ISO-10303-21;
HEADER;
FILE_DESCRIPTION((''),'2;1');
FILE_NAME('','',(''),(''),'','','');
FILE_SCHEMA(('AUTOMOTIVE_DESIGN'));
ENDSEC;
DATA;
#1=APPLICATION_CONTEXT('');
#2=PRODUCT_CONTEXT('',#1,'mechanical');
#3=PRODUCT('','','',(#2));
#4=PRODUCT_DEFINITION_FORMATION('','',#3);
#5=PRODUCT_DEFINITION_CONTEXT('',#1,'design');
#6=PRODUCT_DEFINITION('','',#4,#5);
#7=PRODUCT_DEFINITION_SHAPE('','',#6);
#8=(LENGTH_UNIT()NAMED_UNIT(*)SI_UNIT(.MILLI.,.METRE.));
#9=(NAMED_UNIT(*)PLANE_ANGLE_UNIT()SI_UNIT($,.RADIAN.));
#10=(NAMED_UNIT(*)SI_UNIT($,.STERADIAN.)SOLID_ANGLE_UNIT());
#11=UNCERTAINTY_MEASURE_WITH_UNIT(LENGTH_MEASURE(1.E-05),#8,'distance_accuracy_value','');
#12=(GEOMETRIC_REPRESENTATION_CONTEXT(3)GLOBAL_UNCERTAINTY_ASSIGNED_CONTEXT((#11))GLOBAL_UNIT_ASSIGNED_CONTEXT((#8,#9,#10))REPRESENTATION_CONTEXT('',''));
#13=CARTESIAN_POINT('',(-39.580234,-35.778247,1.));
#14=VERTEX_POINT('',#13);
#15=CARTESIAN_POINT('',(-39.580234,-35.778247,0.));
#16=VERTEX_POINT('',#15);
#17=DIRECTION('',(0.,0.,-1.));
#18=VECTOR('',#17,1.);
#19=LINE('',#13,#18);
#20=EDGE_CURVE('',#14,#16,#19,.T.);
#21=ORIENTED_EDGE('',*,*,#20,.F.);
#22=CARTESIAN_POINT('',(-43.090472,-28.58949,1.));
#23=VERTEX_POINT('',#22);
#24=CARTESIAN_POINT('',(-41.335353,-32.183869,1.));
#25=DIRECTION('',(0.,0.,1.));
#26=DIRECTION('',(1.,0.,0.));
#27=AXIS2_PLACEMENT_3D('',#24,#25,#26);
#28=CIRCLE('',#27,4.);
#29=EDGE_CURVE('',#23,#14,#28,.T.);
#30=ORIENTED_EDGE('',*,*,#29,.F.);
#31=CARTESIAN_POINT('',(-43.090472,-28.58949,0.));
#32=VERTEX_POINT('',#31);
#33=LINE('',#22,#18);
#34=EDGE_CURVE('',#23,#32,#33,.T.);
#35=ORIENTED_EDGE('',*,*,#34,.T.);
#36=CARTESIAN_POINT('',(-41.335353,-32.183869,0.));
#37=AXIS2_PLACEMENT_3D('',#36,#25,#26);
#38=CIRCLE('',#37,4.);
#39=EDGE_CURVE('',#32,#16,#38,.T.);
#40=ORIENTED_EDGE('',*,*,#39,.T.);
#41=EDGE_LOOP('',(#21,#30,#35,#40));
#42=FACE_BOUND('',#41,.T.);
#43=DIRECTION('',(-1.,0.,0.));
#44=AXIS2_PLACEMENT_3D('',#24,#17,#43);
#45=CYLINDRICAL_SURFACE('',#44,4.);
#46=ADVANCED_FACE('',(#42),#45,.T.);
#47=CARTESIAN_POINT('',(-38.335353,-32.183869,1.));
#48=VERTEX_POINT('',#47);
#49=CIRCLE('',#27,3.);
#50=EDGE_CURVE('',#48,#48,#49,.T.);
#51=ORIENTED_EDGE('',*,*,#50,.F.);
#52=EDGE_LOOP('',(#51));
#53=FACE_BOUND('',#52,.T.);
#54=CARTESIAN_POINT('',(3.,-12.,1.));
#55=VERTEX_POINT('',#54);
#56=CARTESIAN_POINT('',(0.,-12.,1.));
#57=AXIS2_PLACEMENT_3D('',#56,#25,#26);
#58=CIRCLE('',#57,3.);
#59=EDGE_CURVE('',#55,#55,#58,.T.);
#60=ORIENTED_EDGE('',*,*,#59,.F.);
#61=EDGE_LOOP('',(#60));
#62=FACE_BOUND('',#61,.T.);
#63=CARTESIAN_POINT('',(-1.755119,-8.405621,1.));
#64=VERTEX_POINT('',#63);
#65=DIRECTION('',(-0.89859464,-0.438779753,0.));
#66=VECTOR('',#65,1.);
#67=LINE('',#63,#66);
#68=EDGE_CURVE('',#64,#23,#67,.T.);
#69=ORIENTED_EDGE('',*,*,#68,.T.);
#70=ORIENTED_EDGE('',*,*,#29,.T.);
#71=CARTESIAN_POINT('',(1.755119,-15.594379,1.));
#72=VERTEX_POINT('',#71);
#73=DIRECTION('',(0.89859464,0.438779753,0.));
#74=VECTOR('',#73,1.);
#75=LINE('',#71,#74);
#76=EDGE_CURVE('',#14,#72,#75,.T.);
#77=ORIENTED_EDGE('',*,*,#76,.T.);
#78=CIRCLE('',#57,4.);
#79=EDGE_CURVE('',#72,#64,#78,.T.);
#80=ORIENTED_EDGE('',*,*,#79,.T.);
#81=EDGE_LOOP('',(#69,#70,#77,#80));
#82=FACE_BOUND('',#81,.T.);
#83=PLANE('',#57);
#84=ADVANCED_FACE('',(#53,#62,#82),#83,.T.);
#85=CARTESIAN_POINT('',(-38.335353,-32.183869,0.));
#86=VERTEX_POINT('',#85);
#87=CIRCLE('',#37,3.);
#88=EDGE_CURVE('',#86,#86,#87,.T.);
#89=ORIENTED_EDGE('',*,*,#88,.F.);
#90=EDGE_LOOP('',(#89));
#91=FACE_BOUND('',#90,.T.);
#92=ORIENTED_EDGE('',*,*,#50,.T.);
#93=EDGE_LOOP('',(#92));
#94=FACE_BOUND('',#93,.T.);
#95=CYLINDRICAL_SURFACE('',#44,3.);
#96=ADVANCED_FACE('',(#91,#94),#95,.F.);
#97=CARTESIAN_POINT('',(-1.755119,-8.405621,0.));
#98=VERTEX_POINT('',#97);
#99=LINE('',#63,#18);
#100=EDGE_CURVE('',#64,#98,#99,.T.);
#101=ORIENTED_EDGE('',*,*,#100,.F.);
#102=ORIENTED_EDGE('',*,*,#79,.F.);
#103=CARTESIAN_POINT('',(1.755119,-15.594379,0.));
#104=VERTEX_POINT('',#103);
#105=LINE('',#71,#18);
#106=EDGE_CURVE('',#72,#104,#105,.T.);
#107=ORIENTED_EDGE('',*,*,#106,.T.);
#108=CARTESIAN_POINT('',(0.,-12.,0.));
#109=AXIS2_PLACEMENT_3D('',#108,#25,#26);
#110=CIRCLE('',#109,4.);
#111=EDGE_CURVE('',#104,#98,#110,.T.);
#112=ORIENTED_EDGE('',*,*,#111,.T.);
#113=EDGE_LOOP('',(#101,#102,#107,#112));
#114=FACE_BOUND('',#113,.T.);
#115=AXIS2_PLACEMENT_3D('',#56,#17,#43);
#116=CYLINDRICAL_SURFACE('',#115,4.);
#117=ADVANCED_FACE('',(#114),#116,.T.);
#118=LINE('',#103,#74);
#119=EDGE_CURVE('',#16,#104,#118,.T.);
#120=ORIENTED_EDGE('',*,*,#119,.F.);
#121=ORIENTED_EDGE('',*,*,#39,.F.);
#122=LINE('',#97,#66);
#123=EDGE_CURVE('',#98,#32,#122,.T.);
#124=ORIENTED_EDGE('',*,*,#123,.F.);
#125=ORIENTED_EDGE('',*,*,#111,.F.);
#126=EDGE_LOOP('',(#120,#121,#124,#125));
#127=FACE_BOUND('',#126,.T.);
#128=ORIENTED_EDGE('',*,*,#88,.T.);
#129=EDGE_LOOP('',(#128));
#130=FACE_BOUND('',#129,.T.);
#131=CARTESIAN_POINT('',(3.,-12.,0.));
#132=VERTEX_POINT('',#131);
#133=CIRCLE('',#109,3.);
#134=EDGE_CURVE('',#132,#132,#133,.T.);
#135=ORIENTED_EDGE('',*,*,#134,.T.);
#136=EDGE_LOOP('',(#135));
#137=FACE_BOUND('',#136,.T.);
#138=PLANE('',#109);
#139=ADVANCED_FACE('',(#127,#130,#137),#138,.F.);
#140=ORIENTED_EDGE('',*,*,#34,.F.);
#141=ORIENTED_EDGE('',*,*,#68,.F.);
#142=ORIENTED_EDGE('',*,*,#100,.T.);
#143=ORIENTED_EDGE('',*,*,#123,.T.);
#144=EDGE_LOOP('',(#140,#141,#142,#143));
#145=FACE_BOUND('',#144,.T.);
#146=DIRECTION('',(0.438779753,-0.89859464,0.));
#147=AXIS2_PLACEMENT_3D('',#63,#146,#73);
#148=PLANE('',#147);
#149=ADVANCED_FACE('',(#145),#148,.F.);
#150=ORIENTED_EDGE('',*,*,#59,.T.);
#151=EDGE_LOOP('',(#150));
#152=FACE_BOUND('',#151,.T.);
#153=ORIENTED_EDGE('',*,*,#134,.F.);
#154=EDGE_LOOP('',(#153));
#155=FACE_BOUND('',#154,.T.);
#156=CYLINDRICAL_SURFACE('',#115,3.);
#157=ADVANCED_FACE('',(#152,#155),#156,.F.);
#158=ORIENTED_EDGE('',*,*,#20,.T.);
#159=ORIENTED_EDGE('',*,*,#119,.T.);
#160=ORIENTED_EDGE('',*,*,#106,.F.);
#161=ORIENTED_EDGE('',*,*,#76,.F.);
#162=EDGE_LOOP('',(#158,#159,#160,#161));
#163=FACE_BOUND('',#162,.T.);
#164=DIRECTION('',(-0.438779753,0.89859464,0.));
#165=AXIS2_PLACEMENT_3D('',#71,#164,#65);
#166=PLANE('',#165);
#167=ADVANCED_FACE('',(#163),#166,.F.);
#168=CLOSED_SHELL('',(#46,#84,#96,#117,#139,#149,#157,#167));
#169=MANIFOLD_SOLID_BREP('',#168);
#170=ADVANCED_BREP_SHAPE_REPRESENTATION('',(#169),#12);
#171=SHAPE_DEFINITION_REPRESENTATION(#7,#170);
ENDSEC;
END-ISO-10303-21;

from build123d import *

# Parameters (mm, degrees)
ESQUISSE2_R               = 3
T_LE_DE_BASE_PLI_E1_DEPTH = 1


# Sheet-metal steps are written as plain solids
with BuildPart() as part:
    # Esquisse2 → Tôle de base pliée1 (new body)
    with BuildSketch(Plane.XY):
        with BuildLine():
            Line((1.755119014, -15.594378562), (-39.580234449, -35.778247223))
            ThreePointArc((-39.580234449, -35.778247223), (-44.929732025, -33.938987675), (-43.090472477, -28.589490099))
            Line((-43.090472477, -28.589490099), (-1.755119014, -8.405621438))
            ThreePointArc((-1.755119014, -8.405621438), (3.594378562, -10.244880986), (1.755119014, -15.594378562))
        make_face()
        with Locations((0, -12)):
            Circle(ESQUISSE2_R, mode=Mode.SUBTRACT)
        with Locations((-41.335353463, -32.183868661)):
            Circle(ESQUISSE2_R, mode=Mode.SUBTRACT)
    extrude(amount=T_LE_DE_BASE_PLI_E1_DEPTH)


solid = part.part
